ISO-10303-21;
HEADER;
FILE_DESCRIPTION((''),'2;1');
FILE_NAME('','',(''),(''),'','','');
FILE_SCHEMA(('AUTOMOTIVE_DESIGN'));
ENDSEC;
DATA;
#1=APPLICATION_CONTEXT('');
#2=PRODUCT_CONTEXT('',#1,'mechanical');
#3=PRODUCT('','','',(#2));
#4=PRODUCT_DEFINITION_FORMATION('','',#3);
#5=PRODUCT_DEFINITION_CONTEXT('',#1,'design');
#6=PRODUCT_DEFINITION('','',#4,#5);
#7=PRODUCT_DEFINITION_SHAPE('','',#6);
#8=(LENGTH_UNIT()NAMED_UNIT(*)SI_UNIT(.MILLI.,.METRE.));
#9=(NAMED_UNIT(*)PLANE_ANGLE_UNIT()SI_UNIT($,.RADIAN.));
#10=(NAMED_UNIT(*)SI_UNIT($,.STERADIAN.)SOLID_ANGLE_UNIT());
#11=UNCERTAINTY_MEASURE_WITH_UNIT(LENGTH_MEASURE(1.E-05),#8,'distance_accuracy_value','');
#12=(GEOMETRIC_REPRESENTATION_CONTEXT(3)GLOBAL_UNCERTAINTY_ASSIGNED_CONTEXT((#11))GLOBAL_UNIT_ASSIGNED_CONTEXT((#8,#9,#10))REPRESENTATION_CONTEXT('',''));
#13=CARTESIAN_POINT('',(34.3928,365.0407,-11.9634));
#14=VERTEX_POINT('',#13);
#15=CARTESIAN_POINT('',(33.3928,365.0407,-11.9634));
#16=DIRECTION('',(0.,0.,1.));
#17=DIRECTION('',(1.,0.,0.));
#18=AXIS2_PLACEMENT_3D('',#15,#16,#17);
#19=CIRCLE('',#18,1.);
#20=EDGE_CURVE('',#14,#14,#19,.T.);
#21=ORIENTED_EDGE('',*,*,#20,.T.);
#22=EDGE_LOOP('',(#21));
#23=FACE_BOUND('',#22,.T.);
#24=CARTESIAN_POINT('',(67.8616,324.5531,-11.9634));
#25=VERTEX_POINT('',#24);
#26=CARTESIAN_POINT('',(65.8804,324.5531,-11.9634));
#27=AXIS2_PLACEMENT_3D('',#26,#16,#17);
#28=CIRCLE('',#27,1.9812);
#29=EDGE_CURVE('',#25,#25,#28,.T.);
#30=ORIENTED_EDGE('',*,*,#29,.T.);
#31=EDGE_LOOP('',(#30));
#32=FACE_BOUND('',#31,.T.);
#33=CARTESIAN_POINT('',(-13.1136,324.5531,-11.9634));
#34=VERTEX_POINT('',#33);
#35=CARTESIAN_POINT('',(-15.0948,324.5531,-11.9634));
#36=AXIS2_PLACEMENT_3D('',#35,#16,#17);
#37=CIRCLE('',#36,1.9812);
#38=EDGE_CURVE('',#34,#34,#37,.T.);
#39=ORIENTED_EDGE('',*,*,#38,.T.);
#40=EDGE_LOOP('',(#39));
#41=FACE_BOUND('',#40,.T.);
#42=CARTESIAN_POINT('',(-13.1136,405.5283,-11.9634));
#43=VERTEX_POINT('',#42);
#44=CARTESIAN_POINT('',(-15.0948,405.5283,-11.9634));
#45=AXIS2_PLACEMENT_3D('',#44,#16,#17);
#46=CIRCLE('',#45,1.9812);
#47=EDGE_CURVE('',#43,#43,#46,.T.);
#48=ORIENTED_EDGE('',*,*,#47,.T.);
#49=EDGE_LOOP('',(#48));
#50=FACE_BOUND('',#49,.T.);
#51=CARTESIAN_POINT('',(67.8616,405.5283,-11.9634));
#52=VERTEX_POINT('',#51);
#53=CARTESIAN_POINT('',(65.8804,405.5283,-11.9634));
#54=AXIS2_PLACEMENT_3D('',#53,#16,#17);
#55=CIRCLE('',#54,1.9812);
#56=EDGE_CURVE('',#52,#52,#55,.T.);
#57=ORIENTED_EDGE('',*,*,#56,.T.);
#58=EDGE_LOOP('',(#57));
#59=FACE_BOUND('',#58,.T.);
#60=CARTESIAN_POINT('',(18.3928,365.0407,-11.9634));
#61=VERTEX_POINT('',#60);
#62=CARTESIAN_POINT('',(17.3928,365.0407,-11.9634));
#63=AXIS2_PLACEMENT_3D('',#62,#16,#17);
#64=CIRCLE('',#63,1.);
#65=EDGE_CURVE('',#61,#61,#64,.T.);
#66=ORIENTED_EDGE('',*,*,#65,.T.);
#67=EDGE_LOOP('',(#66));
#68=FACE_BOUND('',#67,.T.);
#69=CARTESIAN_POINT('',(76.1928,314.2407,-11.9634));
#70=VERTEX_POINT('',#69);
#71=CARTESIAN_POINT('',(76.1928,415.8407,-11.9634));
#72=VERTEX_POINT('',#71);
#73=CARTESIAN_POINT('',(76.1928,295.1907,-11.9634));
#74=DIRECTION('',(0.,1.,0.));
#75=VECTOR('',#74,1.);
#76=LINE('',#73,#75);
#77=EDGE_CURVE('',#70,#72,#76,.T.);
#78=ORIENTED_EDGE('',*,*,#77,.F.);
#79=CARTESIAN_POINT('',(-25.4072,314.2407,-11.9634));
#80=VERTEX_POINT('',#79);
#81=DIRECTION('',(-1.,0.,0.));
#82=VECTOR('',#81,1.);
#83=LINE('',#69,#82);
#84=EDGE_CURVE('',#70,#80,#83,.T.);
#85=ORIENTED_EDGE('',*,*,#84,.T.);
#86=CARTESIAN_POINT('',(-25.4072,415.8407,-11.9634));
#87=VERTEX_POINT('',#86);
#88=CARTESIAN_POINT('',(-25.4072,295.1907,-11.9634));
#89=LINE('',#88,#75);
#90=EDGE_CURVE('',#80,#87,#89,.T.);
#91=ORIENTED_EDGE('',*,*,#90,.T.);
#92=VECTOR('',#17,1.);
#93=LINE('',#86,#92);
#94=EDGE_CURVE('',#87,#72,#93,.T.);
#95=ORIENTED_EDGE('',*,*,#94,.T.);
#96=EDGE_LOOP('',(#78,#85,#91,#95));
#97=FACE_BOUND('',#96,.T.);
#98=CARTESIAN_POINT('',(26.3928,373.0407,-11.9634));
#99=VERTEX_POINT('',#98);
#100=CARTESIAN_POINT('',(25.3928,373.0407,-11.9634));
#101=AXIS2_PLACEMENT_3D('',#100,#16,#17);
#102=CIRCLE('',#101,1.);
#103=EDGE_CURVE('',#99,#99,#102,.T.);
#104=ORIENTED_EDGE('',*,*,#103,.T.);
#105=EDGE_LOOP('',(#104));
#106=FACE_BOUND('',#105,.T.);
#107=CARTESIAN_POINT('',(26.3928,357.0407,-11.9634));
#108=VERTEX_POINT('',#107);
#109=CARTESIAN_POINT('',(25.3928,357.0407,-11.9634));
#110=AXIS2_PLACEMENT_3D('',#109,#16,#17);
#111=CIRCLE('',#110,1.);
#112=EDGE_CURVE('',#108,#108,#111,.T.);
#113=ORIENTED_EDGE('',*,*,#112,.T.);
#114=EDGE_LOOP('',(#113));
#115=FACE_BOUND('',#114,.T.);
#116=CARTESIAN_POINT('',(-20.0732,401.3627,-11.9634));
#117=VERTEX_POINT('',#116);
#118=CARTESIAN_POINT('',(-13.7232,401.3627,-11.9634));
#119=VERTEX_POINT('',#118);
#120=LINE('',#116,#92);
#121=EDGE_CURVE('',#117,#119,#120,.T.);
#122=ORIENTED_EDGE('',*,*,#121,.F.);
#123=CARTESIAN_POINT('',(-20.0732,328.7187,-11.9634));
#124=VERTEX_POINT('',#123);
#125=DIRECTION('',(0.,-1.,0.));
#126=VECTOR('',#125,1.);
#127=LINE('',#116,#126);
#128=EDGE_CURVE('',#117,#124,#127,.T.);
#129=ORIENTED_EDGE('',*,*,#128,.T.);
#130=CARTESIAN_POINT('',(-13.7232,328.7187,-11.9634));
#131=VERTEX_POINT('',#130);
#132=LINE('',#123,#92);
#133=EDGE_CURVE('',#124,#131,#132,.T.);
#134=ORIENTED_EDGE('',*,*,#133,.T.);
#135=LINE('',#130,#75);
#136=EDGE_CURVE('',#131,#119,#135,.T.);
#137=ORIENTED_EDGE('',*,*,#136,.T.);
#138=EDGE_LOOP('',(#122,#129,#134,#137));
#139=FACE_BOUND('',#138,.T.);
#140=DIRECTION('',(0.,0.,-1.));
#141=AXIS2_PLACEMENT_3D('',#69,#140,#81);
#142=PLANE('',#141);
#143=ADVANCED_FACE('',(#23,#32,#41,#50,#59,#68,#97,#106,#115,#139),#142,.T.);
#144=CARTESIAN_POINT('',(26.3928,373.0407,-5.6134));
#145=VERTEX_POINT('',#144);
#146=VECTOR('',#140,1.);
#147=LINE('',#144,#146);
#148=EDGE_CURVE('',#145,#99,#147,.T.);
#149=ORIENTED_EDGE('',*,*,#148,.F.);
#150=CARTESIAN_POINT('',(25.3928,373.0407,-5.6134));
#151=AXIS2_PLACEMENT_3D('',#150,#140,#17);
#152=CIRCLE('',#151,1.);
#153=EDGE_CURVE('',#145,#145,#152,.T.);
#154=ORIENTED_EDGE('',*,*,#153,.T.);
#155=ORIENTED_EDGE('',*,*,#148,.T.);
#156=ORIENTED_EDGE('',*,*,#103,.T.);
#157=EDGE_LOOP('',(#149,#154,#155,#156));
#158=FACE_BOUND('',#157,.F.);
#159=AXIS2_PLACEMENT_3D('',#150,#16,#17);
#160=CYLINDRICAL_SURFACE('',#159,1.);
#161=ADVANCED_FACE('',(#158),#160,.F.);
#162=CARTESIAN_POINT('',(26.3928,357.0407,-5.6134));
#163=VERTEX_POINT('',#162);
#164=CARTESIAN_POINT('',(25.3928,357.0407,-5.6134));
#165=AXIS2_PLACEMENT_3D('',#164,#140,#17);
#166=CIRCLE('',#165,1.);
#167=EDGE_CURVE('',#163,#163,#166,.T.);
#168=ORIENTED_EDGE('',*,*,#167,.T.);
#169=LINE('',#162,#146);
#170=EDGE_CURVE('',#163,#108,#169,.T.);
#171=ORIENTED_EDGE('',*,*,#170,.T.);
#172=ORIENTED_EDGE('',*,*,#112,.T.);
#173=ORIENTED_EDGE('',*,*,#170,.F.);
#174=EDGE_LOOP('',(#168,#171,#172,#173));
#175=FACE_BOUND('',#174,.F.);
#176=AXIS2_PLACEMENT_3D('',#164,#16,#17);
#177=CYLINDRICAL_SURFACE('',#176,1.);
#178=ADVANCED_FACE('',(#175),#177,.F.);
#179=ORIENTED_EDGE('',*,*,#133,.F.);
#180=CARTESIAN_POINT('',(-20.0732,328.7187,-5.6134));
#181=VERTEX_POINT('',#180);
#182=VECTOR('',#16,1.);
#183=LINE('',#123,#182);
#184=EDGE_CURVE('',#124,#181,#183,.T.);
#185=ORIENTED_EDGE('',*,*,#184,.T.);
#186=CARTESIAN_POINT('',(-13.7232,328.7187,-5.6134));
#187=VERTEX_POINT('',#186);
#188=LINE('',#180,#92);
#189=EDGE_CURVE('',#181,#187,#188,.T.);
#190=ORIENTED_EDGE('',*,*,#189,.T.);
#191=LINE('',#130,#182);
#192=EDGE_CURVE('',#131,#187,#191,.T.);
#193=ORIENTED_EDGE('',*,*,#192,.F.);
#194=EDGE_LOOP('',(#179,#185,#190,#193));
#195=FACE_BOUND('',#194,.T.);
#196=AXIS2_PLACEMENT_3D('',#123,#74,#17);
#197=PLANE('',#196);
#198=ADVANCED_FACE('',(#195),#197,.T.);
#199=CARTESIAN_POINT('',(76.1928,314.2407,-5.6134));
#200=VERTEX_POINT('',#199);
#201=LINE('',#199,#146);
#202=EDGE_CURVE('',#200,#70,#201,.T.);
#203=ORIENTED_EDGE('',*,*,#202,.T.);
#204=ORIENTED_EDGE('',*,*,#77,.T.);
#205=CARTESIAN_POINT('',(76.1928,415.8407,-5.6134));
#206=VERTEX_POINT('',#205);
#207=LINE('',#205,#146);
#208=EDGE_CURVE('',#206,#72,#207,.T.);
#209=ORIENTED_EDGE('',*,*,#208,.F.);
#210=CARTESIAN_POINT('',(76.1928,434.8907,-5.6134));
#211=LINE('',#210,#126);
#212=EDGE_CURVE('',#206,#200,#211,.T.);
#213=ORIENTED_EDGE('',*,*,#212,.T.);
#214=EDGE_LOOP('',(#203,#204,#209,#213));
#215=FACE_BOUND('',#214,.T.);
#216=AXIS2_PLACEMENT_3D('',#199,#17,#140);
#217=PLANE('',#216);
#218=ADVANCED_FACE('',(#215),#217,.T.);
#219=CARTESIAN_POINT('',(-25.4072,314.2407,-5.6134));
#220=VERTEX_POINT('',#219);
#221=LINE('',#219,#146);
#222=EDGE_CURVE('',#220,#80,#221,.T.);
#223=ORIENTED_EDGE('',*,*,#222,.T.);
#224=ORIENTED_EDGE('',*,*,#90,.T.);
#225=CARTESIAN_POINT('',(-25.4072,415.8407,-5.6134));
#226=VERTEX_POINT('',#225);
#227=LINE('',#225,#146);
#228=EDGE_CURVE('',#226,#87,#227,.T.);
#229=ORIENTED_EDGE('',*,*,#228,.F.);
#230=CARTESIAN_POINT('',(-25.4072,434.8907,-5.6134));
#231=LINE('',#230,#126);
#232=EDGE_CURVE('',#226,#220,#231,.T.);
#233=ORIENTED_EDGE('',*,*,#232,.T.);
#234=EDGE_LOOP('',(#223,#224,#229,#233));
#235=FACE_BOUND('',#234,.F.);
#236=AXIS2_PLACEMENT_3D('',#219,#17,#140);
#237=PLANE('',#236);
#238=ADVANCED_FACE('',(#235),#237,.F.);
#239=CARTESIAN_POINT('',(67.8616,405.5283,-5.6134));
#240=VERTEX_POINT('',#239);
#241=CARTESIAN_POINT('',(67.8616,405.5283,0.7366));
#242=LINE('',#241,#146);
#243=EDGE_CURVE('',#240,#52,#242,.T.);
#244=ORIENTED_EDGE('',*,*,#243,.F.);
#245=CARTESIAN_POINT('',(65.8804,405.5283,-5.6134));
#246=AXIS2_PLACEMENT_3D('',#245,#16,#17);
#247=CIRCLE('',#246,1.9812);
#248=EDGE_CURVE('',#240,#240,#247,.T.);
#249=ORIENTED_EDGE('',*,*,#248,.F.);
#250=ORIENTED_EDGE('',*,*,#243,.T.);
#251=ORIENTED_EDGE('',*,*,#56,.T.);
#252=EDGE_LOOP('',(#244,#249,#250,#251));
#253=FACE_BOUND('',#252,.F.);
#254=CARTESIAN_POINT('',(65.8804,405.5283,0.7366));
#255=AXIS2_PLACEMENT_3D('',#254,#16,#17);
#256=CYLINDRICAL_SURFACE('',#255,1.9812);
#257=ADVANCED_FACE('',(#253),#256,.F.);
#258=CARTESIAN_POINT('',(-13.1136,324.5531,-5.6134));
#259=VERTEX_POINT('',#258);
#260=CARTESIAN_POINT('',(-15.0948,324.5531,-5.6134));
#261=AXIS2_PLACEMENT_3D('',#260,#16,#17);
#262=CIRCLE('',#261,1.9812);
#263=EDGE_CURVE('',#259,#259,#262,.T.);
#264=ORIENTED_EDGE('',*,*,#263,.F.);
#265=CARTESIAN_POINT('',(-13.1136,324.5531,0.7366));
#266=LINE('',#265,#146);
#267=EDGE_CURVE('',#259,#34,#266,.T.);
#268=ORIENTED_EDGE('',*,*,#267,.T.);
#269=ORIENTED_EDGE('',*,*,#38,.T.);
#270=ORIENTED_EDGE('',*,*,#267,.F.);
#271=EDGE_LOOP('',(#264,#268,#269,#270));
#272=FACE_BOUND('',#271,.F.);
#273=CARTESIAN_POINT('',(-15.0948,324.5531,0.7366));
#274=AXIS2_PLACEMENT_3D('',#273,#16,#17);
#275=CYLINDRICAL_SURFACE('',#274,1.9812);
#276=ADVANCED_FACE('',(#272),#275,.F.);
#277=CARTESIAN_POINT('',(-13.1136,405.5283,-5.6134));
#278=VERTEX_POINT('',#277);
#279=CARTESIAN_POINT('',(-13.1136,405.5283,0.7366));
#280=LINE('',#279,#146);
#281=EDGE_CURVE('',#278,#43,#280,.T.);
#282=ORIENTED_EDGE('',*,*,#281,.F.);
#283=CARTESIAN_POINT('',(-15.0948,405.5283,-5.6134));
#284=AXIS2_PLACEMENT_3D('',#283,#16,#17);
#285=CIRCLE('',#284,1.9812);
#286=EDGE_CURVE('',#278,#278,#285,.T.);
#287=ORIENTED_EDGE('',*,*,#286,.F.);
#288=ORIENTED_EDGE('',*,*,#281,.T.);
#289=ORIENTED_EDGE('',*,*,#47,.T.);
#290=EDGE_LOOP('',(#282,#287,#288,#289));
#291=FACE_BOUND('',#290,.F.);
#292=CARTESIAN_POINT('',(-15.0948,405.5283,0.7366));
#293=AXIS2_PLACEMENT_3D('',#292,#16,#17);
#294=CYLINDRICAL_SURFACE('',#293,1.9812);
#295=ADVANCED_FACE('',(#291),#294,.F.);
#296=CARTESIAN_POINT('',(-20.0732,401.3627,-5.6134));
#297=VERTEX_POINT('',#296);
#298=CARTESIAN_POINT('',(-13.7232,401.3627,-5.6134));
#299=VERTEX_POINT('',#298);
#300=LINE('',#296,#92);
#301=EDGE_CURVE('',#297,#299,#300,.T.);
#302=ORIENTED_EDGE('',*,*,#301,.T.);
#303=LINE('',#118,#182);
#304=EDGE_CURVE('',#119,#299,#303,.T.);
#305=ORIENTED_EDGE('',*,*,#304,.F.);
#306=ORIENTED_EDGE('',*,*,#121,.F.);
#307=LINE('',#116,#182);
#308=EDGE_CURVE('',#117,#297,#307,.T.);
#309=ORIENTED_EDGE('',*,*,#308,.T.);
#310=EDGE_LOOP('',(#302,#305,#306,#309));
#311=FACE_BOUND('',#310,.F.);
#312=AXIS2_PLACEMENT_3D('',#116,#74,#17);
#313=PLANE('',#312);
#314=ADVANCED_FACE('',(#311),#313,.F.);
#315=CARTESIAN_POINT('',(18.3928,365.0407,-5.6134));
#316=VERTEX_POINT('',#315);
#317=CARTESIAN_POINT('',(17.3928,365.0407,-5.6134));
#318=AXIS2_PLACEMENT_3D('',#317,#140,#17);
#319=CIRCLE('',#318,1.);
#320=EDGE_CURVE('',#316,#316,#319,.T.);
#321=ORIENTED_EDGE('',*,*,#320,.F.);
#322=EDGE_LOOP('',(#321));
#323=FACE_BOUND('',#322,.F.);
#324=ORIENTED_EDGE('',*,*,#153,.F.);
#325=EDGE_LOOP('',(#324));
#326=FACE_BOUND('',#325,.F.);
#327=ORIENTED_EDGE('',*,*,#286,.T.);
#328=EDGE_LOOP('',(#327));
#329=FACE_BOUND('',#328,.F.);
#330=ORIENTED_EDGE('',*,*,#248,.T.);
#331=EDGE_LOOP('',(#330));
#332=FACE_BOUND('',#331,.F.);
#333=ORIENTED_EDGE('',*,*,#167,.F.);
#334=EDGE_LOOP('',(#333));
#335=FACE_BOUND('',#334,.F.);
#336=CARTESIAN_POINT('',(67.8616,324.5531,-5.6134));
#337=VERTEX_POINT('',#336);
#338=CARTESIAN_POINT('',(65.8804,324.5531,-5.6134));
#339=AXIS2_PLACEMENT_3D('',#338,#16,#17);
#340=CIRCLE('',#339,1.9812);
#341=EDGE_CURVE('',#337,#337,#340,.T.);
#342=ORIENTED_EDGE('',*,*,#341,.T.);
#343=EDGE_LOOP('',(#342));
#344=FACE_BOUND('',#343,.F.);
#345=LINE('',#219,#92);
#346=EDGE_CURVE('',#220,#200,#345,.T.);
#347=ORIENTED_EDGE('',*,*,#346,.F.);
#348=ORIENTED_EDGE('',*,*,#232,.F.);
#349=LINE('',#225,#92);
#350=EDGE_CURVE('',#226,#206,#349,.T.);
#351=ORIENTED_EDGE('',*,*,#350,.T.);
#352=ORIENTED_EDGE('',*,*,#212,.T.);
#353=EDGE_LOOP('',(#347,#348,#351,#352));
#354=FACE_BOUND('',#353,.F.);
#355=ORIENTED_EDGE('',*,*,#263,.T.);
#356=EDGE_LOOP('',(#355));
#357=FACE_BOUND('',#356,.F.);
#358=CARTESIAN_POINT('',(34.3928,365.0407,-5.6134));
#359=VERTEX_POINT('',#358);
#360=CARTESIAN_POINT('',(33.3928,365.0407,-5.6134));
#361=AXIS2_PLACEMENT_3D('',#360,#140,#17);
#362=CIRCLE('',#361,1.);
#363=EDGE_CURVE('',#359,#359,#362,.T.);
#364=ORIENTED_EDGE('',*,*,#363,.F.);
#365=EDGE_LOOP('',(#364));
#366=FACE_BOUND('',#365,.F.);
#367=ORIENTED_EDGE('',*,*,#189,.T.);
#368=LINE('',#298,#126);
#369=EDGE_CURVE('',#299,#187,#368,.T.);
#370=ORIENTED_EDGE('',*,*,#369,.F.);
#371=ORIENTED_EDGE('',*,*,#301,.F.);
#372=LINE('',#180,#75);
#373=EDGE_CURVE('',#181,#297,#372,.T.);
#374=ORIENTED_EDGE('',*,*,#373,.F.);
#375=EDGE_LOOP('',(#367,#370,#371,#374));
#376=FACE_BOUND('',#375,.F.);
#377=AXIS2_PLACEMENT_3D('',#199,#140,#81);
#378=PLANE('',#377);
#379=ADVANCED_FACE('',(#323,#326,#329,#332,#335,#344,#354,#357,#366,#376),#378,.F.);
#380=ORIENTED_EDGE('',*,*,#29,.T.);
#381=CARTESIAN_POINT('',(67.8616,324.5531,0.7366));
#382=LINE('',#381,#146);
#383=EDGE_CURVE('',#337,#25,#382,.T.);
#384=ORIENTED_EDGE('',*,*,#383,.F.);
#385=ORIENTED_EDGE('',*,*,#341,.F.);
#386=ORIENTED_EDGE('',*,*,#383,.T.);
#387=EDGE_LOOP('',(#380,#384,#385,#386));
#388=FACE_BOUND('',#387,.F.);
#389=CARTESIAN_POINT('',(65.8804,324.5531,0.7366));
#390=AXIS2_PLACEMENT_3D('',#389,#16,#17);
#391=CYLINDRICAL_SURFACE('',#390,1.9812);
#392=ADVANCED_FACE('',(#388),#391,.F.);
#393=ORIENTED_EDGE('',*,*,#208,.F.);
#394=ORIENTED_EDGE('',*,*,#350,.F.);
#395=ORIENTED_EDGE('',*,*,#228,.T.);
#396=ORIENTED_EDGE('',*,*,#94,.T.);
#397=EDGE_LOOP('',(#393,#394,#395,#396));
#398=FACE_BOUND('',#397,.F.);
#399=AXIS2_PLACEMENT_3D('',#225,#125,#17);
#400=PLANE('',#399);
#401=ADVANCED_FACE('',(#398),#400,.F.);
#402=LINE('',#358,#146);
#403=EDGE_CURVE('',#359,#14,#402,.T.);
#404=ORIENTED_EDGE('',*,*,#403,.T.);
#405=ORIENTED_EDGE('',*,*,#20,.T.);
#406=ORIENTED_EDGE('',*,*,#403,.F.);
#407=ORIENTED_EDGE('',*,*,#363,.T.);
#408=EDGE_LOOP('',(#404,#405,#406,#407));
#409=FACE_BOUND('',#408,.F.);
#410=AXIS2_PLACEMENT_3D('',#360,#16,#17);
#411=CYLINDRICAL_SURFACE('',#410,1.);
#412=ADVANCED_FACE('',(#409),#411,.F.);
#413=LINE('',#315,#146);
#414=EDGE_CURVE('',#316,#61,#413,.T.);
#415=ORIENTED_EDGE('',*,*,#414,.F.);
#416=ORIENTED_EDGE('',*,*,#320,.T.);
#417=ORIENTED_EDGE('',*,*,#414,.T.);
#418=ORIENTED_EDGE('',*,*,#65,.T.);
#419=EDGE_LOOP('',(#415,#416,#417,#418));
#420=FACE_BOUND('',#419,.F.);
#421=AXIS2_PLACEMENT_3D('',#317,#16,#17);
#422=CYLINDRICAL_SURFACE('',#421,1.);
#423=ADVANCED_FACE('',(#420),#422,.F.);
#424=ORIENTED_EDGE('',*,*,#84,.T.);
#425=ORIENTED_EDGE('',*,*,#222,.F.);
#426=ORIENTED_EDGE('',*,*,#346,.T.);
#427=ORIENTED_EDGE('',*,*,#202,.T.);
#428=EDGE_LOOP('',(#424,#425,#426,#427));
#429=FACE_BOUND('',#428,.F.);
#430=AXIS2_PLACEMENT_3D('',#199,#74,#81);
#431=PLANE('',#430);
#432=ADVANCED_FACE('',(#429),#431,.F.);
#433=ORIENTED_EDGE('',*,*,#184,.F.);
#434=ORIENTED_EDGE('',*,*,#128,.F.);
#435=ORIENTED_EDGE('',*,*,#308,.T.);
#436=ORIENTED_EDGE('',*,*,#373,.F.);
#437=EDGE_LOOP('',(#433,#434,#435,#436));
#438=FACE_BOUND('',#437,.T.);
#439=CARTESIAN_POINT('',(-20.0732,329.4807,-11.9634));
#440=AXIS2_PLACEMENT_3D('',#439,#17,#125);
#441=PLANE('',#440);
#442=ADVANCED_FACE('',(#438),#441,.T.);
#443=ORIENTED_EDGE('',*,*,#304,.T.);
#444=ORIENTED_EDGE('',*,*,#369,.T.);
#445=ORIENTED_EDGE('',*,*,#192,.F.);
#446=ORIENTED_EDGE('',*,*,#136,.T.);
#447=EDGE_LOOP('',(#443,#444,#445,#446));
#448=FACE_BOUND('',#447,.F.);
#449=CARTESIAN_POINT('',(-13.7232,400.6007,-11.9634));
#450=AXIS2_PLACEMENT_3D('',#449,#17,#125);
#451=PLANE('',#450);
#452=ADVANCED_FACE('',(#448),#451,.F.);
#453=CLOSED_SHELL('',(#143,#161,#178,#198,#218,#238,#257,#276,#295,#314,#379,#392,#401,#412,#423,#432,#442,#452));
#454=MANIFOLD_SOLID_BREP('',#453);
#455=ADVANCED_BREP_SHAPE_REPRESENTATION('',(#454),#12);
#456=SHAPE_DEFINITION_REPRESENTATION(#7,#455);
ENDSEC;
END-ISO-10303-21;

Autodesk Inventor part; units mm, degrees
ref_plane "YZ Plane" through (0, 0, 0) normal (1, 0, 0) x (0, 1, 0)
ref_plane "XZ Plane" through (0, 0, 0) normal (0, 1, 0) x (-1, 0, 0)
ref_plane "XY Plane" through (0, 0, 0) normal (0, 0, 1) x (1, 0, 0)
sketch "Sketch1" plane through (0, 0, 0) normal (0, 0, 1) x (1, 0, 0)
  line L0 (-25.4072, 25.3665) -> (76.1928, 25.3665)
  line L1 (76.1928, 25.3665) -> (76.1928, -76.2335)
  line L2 (76.1928, -76.2335) -> (-25.4072, -76.2335)
  line L3 (-25.4072, -76.2335) -> (-25.4072, 25.3665)
  point P0 (0, 0)
  dimension "d0" = 101.6
  dimension "d1" = 101.6
extrude "Extrusion1" add sketch "Sketch1" along normal blind 0.7366
sketch "Sketch2" plane through (0, 0, 0.7366) normal (0, 0, 1) x (1, 0, 0)
  line L0 (-25.4072, 25.3665) -> (76.1928, -76.2335)
  line L1 (76.1928, 25.3665) -> (-25.4072, -76.2335)
  circle A0 centre (25.3928, -25.4335) radius 27.432
  point P0 (0, 0)
  dimension "d4" = 54.864
extrude "Extrusion2" cut sketch "Sketch2" against normal blind 0.7366
sketch "Sketch3" plane through (0, 0, 0.7366) normal (0, 0, 1) x (1, 0, 0)
  line L0 (-25.4072, -76.2335) -> (-25.4072, 25.3665) projected
  line L1 (-25.4072, 25.3665) -> (-25.4072, -25.4335)
  line L2 (-25.4072, -25.4335) -> (-25.4072, 19.4102)
  line L3 (-25.4072, 25.3665) -> (76.1928, -76.2335)
  line L4 (76.1928, 25.3665) -> (-25.4072, -76.2335)
  circle A0 centre (-19.4509, 19.4102) radius 1.9812
  point P0 (0, 0)
  dimension "d7" = 44.8437
  dimension "d8" = 3.9624
extrude "Extrusion3" cut sketch "Sketch3" against normal blind 0.7366 contours A0 L3 | L3 A0
sketch "Sketch4" plane through (0, 0, 0.7366) normal (0, 0, 1) x (1, 0, 0)
  line L0 (-25.4072, -76.2335) -> (76.1928, 25.3665)
  line L1 (-25.4072, 25.3665) -> (76.1928, -76.2335)
  circle A0 centre (70.2365, 19.4102) radius 1.9819
  circle A1 centre (70.2365, -70.2772) radius 1.983
  circle A2 centre (-19.4509, -70.2772) radius 1.9812
  point P0 (0, 0)
extrude "Extrusion4" cut sketch "Sketch4" against normal blind 0.7366
sketch "Sketch5" plane through (0, 0, 0.7366) normal (0, 0, 1) x (1, 0, 0)
  circle A0 centre (25.3928, -25.4335) radius 27.432 projected
  circle A1 centre (25.3928, -25.4335) radius 29.972
  circle A2 centre (25.3928, -25.4335) radius 32.512
  point P0 (0, 0)
  dimension "d13" = 59.944
  dimension "d14" = 65.024
extrude "Extrusion5" add sketch "Sketch5" along normal blind 6.6548 contours A2
fillet "Fillet1" radius 3.175 4 edges at (-25.4072, 25.3665, 0.3683) (76.1928, 25.3665, 0.3683) (76.1928, -76.2335, 0.3683) (-25.4072, -76.2335, 0.3683)
sketch "Sketch6" plane through (25.3928, -25.4335, 0.7366) normal (0, 0, 1) x (1, 0, 0)
  circle A0 centre (0, 0) radius 29.972 projected
  circle A1 centre (0, 0) radius 27.432 projected
  point P0 (-25.3928, 25.4335)
extrude "Extrusion6" add sketch "Sketch6" along normal blind 9.1948
sketch "Sketch7" plane through (25.3928, -25.4335, 7.3914) normal (0, 0, 1) x (1, 0, 0)
  circle A0 centre (0, 0) radius 29.972 projected
  circle A1 centre (0, 0) radius 32.512 projected
  point P0 (-25.3928, 25.4335)
extrude "Extrusion7" cut sketch "Sketch7" against normal blind 6.6548
sketch "Sketch8" plane through (25.3928, -25.4335, 9.9314) normal (0, 0, 1) x (1, 0, 0)
  circle A0 centre (0, 0) radius 27.432 projected
  circle A1 centre (0, 0) radius 29.972 projected
  point P0 (-25.3928, 25.4335)
extrude "Extrusion8" cut sketch "Sketch8" against normal blind 2.54
sketch "Sketch9" plane through (0, 0, 0.7366) normal (0, 0, 1) x (1, 0, 0)
  circle A0 centre (-19.4509, 19.4102) radius 1.9812 projected
  circle A1 centre (70.2365, -70.2772) radius 1.983 projected
  circle A2 centre (-19.4509, -70.2772) radius 1.9812 projected
  circle A3 centre (70.2365, 19.4102) radius 1.9819 projected
  point P0 (0, 0)
extrude "Extrusion9" add sketch "Sketch9" against normal blind 0.7366
sketch "Sketch10" plane through (0, 0, 0.7366) normal (0, 0, 1) x (1, 0, 0)
  line L0 (-25.4072, 25.3665) -> (76.1928, 25.3665)
  line L1 (76.1928, 25.3665) -> (76.1928, -76.2335)
  line L2 (76.1928, -76.2335) -> (-25.4072, -76.2335)
  line L3 (-25.4072, -76.2335) -> (-25.4072, 25.3665)
  line L4 (-25.4072, 25.3665) -> (76.1928, -76.2335)
  line L5 (-25.4072, -76.2335) -> (76.1928, 25.3665)
  line L6 (-25.4072, 25.3665) -> (-25.4072, -25.4335)
  line L7 (-25.4072, -25.4335) -> (-25.4072, 15.0541)
  circle A0 centre (-15.0948, 15.0541) radius 1.9812
  circle A1 centre (65.8804, 15.0541) radius 1.9818
  circle A2 centre (65.8804, -65.9211) radius 1.9832
  circle A3 centre (-15.0948, -65.9211) radius 1.9812
  point P0 (0, 0)
  dimension "d26" = 40.4876
  dimension "d27" = 3.9624
extrude "Extrusion10" cut sketch "Sketch10" against normal blind 0.7366 contours A0 L4 | L4 A0 | A1 L5 | L5 A1 | A2 L4 | L4 A2 | A3 L5 | L5 A3
sketch "Sketch11" plane through (0, 0, 0.7366) normal (0, 0, 1) x (1, 0, 0)
  circle A0 centre (-15.0948, 15.0541) radius 1.9812 projected
  circle A1 centre (-15.0948, -65.9211) radius 1.9812 projected
  circle A2 centre (65.8804, 15.0541) radius 1.9818 projected
  circle A3 centre (65.8804, -65.9211) radius 1.9832 projected
  line L0 (-25.4072, 25.3665) -> (76.1928, 25.3665)
  line L1 (76.1928, 25.3665) -> (76.1928, -76.2335)
  line L2 (76.1928, -76.2335) -> (-25.4072, -76.2335)
  line L3 (-25.4072, -76.2335) -> (-25.4072, 25.3665)
  point P0 (0, 0)
extrude "Extrusion11" add sketch "Sketch11" along normal blind 12.7
sketch "Sketch12" plane through (0, 0, 13.4366) normal (0, 0, 1) x (1, 0, 0)
  circle A0 centre (65.8804, -65.9211) radius 1.9832 projected
  circle A1 centre (65.8804, 15.0541) radius 1.9818 projected
  circle A2 centre (-15.0948, 15.0541) radius 1.9812 projected
  circle A3 centre (-15.0948, -65.9211) radius 1.9812 projected
  line L0 (76.1928, 25.3665) -> (76.1928, -76.2335) projected
  line L1 (-25.4072, 25.3665) -> (76.1928, 25.3665) projected
  line L2 (-25.4072, -76.2335) -> (-25.4072, 25.3665) projected
  line L3 (76.1928, -76.2335) -> (-25.4072, -76.2335) projected
  point P0 (0, 0)
extrude "Extrusion12" add sketch "Sketch12" against normal blind 19.05
sketch "Sketch13" plane through (0, 0, 13.4366) normal (0, 0, 1) x (1, 0, 0)
  circle A0 centre (65.8804, -65.9211) radius 1.9832 projected
  circle A1 centre (65.8804, 15.0541) radius 1.9818 projected
  circle A2 centre (-15.0948, 15.0541) radius 1.9812 projected
  circle A3 centre (-15.0948, -65.9211) radius 1.9812 projected
  line L0 (76.1928, 25.3665) -> (76.1928, -76.2335) projected
  line L1 (-25.4072, 25.3665) -> (76.1928, 25.3665) projected
  line L2 (-25.4072, -76.2335) -> (-25.4072, 25.3665) projected
  line L3 (76.1928, -76.2335) -> (-25.4072, -76.2335) projected
  point P0 (0, 0)
extrude "Extrusion13" cut sketch "Sketch13" against normal blind 12.7
sketch "Sketch14" plane through (-25.4072, 25.3665, -5.6134) normal (0, 1, 0) x (1, 0, 0)
  line L0 (0, -6.35) -> (101.6, -6.35) projected
  line L1 (101.6, -6.35) -> (101.6, 0) projected
  line L2 (101.6, 0) -> (0, 0) projected
  line L3 (0, 0) -> (0, -6.35) projected
  point P0 (25.4072, -5.6134)
sketch "Sketch15" plane through (-25.4072, -76.2335, -5.6134) normal (-1, 0, 0) x (0, 0, 1)
  line L0 (6.35, 0) -> (6.35, 101.6) projected
  line L1 (0, 101.6) -> (6.35, 101.6) projected
  line L2 (0, 101.6) -> (0, 0) projected
  line L3 (6.35, 0) -> (0, 0) projected
  point P0 (5.6134, 76.2335)
sketch "Sketch16" plane through (-25.4072, -76.2335, -5.6134) normal (0, -1, 0) x (1, 0, 0)
  line L0 (101.6, 6.35) -> (0, 6.35) projected
  line L1 (0, 6.35) -> (0, 0) projected
  line L2 (0, 0) -> (101.6, 0) projected
  line L3 (101.6, 6.35) -> (101.6, 0) projected
  point P0 (25.4072, 5.6134)
sketch "Sketch17" plane through (76.1928, -76.2335, -5.6134) normal (1, 0, 0) x (0, 0, -1)
  line L0 (-6.35, 101.6) -> (-6.35, 0) projected
  line L1 (-6.35, 0) -> (0, 0) projected
  line L2 (0, 0) -> (0, 101.6) projected
  line L3 (-6.35, 101.6) -> (0, 101.6) projected
  point P0 (-5.6134, 76.2335)
extrude "Extrusion14" add sketch "Sketch14" along normal blind 53.975
extrude "Extrusion15" add sketch "Sketch17" along normal blind 47.625
extrude "Extrusion16" add sketch "Sketch16" along normal blind 47.625
extrude "Extrusion17" add sketch "Sketch15" along normal blind 53.975
sketch "Sketch18" plane through (-25.4072, 25.3665, 0.7366) normal (0, 1, 0) x (1, 0, 0)
  line L0 (-53.975, 6.35) -> (-53.975, 0) projected
  line L1 (0, 0) -> (-53.975, 0) projected
  line L2 (0, 6.35) -> (0, 0) projected
  line L3 (0, 6.35) -> (-53.975, 6.35) projected
  point P0 (25.4072, 0.7366)
extrude "Extrusion18" add sketch "Sketch18" along normal blind 53.975
sketch "Sketch19" plane through (76.1928, 25.3665, 0.7366) normal (0, 1, 0) x (1, 0, 0)
  line L0 (47.625, 0) -> (47.625, 6.35) projected
  line L1 (0, 6.35) -> (47.625, 6.35) projected
  line L2 (0, 0) -> (0, 6.35) projected
  line L3 (0, 0) -> (47.625, 0) projected
  point P0 (-76.1928, 0.7366)
extrude "Extrusion19" add sketch "Sketch19" along normal blind 53.975
sketch "Sketch20" plane through (-25.4072, -123.8585, -5.6134) normal (-1, 0, 0) x (0, 0, 1)
  line L0 (6.35, 47.625) -> (0, 47.625) projected
  line L1 (0, 47.625) -> (0, 0) projected
  line L2 (0, 0) -> (6.35, 0) projected
  line L3 (6.35, 0) -> (6.35, 47.625) projected
  point P0 (5.6134, 123.8585)
extrude "Extrusion20" add sketch "Sketch20" along normal blind 53.975
sketch "Sketch21" plane through (123.8178, -76.2335, -5.6134) normal (0, -1, 0) x (1, 0, 0)
  line L0 (-47.625, 6.35) -> (-47.625, 0) projected
  line L1 (-47.625, 0) -> (0, 0) projected
  line L2 (0, 0) -> (0, 6.35) projected
  line L3 (0, 6.35) -> (-47.625, 6.35) projected
  point P0 (-123.8178, 5.6134)
extrude "Extrusion21" add sketch "Sketch21" along normal blind 47.625
sketch "Sketch22" plane through (-25.4072, 79.3415, -5.6134) normal (0, 1, 0) x (1, 0, 0)
  line L0 (149.225, -6.35) -> (-53.975, -6.35) projected
  line L1 (149.225, 0) -> (149.225, -6.35) projected
  line L2 (-53.975, 0) -> (149.225, 0) projected
  line L3 (-53.975, -6.35) -> (-53.975, 0) projected
  point P0 (25.4072, -5.6134)
extrude "Extrusion22" cut sketch "Sketch22" against normal blind 53.975
sketch "Sketch23" plane through (-79.3822, -76.2335, -5.6134) normal (-1, 0, 0) x (0, 0, 1)
  line L0 (6.35, 101.6) -> (0, 101.6) projected
  line L1 (0, -47.625) -> (0, 101.6) projected
  line L2 (6.35, -47.625) -> (0, -47.625) projected
  line L3 (6.35, 101.6) -> (6.35, -47.625) projected
  point P0 (5.6134, 76.2335)
extrude "Extrusion23" cut sketch "Sketch23" against normal blind 53.975
sketch "Sketch24" plane through (-25.4072, -123.8585, -5.6134) normal (0, -1, 0) x (1, 0, 0)
  line L0 (0, 6.35) -> (0, 0) projected
  line L1 (149.225, 0) -> (0, 0) projected
  line L2 (149.225, 6.35) -> (149.225, 0) projected
  line L3 (0, 6.35) -> (149.225, 6.35) projected
  point P0 (25.4072, 5.6134)
extrude "Extrusion24" cut sketch "Sketch24" against normal blind 47.625
sketch "Sketch25" plane through (123.8178, -76.2335, -5.6134) normal (1, 0, 0) x (0, 0, -1)
  line L0 (-6.35, 0) -> (0, 0) projected
  line L1 (0, 101.6) -> (0, 0) projected
  line L2 (0, 101.6) -> (-6.35, 101.6) projected
  line L3 (-6.35, 0) -> (-6.35, 101.6) projected
  point P0 (-5.6134, 76.2335)
extrude "Extrusion25" cut sketch "Sketch25" against normal blind 47.625
sketch "Sketch26" plane through (-25.4072, 25.3665, -5.6134) normal (0, 1, 0) x (1, 0, 0)
  line L0 (101.6, -6.35) -> (101.6, 0) projected
  line L1 (0, 0) -> (101.6, 0) projected
  line L2 (0, 0) -> (0, -6.35) projected
  line L3 (101.6, -6.35) -> (0, -6.35) projected
  point P0 (25.4072, -5.6134)
extrude "Extrusion26" add sketch "Sketch26" along normal blind 53.975
sketch "Sketch27" plane through (-25.4072, -76.2335, -5.6134) normal (-1, 0, 0) x (0, 0, 1)
  line L0 (0, 0) -> (6.35, 0) projected
  line L1 (6.35, 0) -> (6.35, 155.575) projected
  line L2 (6.35, 155.575) -> (0, 155.575) projected
  line L3 (0, 0) -> (0, 155.575) projected
  point P0 (5.6134, 76.2335)
extrude "Extrusion27" add sketch "Sketch27" along normal blind 53.975
sketch "Sketch28" plane through (-25.4072, -76.2335, -5.6134) normal (0, -1, 0) x (1, 0, 0)
  line L0 (101.6, 0) -> (101.6, 6.35) projected
  line L1 (101.6, 6.35) -> (-53.975, 6.35) projected
  line L2 (-53.975, 6.35) -> (-53.975, 0) projected
  line L3 (101.6, 0) -> (-53.975, 0) projected
  point P0 (25.4072, 5.6134)
extrude "Extrusion28" add sketch "Sketch28" along normal blind 22.225
sketch "Sketch29" plane through (-25.4072, 79.3415, -5.6134) normal (0, 1, 0) x (1, 0, 0)
  line L0 (101.6, -6.35) -> (-53.975, -6.35) projected
  line L1 (101.6, 0) -> (101.6, -6.35) projected
  line L2 (-53.975, 0) -> (101.6, 0) projected
  line L3 (-53.975, 0) -> (-53.975, -6.35) projected
  point P0 (25.4072, -5.6134)
extrude "Extrusion29" add sketch "Sketch29" along normal blind 158.6992
sketch "Sketch30" plane through (-25.4072, 238.0407, -5.6134) normal (0, 1, 0) x (1, 0, 0)
  line L0 (-53.975, -6.35) -> (-53.975, 0) projected
  line L1 (101.6, -6.35) -> (-53.975, -6.35) projected
  line L2 (101.6, 0) -> (101.6, -6.35) projected
  line L3 (-53.975, 0) -> (101.6, 0) projected
  point P0 (25.4072, -5.6134)
extrude "Extrusion30" add sketch "Sketch30" along normal blind 177.8
sketch "Sketch31" plane through (0, 0, 0.7366) normal (0, 0, 1) x (1, 0, 0)
  line L0 (76.1928, 415.8407) -> (76.1928, -98.4585) projected
  line L1 (76.1928, 415.8407) -> (-79.3822, 415.8407) projected
  line L2 (65.8804, 415.8407) -> (65.8804, 383.3033)
  line L3 (65.8804, 383.3033) -> (-17.076, 383.3033)
  line L4 (-17.076, 383.3033) -> (-13.1136, 383.3033)
  line L5 (-13.1136, 383.3033) -> (-15.0948, 383.3033)
  circle A0 centre (-15.0948, 383.3033) radius 1.9812
  circle A1 centre (65.8804, 383.3033) radius 1.9812
  line L6 (65.8804, 383.3033) -> (65.8804, 302.3281)
  circle A2 centre (65.8804, 302.3281) radius 1.9812
  line L7 (-15.0948, 383.3033) -> (-15.0948, 302.3281)
  circle A3 centre (-15.0948, 302.3281) radius 1.9812
  point P0 (0, 0)
  dimension "d70" = 32.5374
  dimension "d71" = 80.9752
extrude "Extrusion31" cut sketch "Sketch31" against normal blind 177.8
sketch "Sketch32" plane through (0, 0, -5.6134) normal (0, 0, -1) x (-1, 0, 0)
  circle A0 centre (15.0948, 383.3033) radius 1.9812 projected
  circle A1 centre (15.0948, 302.3281) radius 1.9812 projected
  circle A2 centre (-65.8804, 302.3281) radius 1.9812 projected
  circle A3 centre (-65.8804, 383.3033) radius 1.9812 projected
  circle A4 centre (15.0948, -65.9211) radius 1.9812 projected
  circle A5 centre (15.0948, 15.0541) radius 1.9812 projected
  circle A6 centre (-65.8804, 15.0541) radius 1.9818 projected
  circle A7 centre (-65.8804, -65.9211) radius 1.9832 projected
  line L0 (-76.1928, 415.8407) -> (-76.1928, -98.4585) projected
  line L1 (-76.1928, -98.4585) -> (79.3822, -98.4585) projected
  line L2 (79.3822, -98.4585) -> (79.3822, 415.8407) projected
  line L3 (79.3822, 415.8407) -> (-76.1928, 415.8407) projected
  point P0 (0, 0)
extrude "Extrusion32" add sketch "Sketch32" along normal blind 6.35
sketch "Sketch33" plane through (0, 0, 0.7366) normal (0, 0, 1) x (1, 0, 0)
  line L0 (76.1928, 415.8407) -> (76.1928, -98.4585) projected
  line L1 (76.1928, 158.6911) -> (76.1928, 107.8911)
  line L2 (76.1928, 107.8911) -> (25.3928, 107.8911)
  line L3 (25.3928, 107.8911) -> (25.3928, 209.4911)
  line L4 (25.3928, 209.4911) -> (76.1928, 209.4911)
  line L5 (76.1928, 209.4911) -> (76.1928, 107.8911)
  point P0 (0, 0)
  dimension "d76" = 50.8
  dimension "d77" = 50.8
  dimension "d78" = 101.6
extrude "Extrusion33" cut sketch "Sketch33" against normal blind 25.4
sketch "Sketch34" plane through (0, 0, 0.7366) normal (0, 0, 1) x (1, 0, 0)
  line L0 (25.3928, 107.8911) -> (25.3928, 209.4911) projected
  line L1 (76.1928, 107.8911) -> (76.1928, -98.4585) projected
  line L2 (25.3928, 158.6911) -> (-25.4072, 158.6911)
  circle A0 centre (-25.4072, 158.6911) radius 12.7
  point P0 (0, 0)
  dimension "d81" = 50.8
  dimension "d82" = 25.4
extrude "Extrusion34" cut sketch "Sketch34" against normal blind 25.4
fillet "Fillet2" radius 12.7 2 edges at (25.3928, 209.4911, -5.6134) (25.3928, 107.8911, -5.6134)
sketch "Sketch35" plane through (0, 0, 0.7366) normal (0, 0, 1) x (1, 0, 0)
  line L0 (-79.3822, 415.8407) -> (76.1928, 415.8407)
  line L1 (76.1928, 415.8407) -> (76.1928, 422.1907)
  line L2 (76.1928, 422.1907) -> (-79.3822, 422.1907)
  line L3 (-79.3822, 422.1907) -> (-79.3822, 415.8407)
  line L4 (-79.3822, -98.4585) -> (76.1928, -98.4585)
  line L5 (76.1928, -98.4585) -> (76.1928, -104.8085)
  line L6 (76.1928, -104.8085) -> (-79.3822, -104.8085)
  line L7 (-79.3822, -104.8085) -> (-79.3822, -98.4585)
  point P0 (0, 0)
  dimension "d86" = 6.35
  dimension "d87" = 6.35
extrude "Extrusion35" add sketch "Sketch35" against normal blind 6.35
sketch "Sketch36" plane through (-25.4072, 415.8407, -5.6134) normal (0, 1, 0) x (1, 0, 0)
  line L0 (-53.975, 0) -> (101.6, 0) projected
  line L1 (101.6, 6.35) -> (101.6, 0) projected
  line L2 (101.6, 6.35) -> (-53.975, 6.35) projected
  line L3 (-53.975, 0) -> (-53.975, 6.35) projected
  point P0 (25.4072, -5.6134)
extrude "Extrusion36" add sketch "Sketch36" along normal blind 6.35
sketch "Sketch37" plane through (-25.4072, -98.4585, -5.6134) normal (0, -1, 0) x (1, 0, 0)
  line L0 (101.6, 0) -> (-53.975, 0) projected
  line L1 (-53.975, -6.35) -> (-53.975, 0) projected
  line L2 (-53.975, -6.35) -> (101.6, -6.35) projected
  line L3 (101.6, 0) -> (101.6, -6.35) projected
  point P0 (25.4072, 5.6134)
extrude "Extrusion37" add sketch "Sketch37" along normal blind 6.35
sketch "Sketch38" plane through (0, 0, 0.7366) normal (0, 0, 1) x (1, 0, 0)
  line L0 (76.1928, 422.1907) -> (-79.3822, 422.1907) projected
  line L1 (76.1928, 107.8911) -> (76.1928, -104.8085) projected
  circle A0 centre (65.8804, 302.3281) radius 1.9812 projected
  circle A1 centre (-15.0948, 302.3281) radius 1.9812 projected
  line L2 (-15.0948, 422.1907) -> (-15.0948, 405.5283)
  line L3 (-15.0948, 405.5283) -> (65.8804, 405.5283)
  line L4 (65.8804, 302.3281) -> (65.8804, 324.5531)
  line L5 (-15.0948, 302.3281) -> (-15.0948, 324.5531)
  circle A2 centre (-15.0948, 324.5531) radius 1.9812
  circle A3 centre (-15.0948, 405.5283) radius 1.9812
  circle A4 centre (65.8804, 405.5283) radius 1.9812
  circle A5 centre (65.8804, 324.5531) radius 1.9812
  point P0 (0, 0)
  dimension "d94" = 16.6624
  dimension "d95" = 22.225
extrude "Extrusion38" cut sketch "Sketch38" against normal blind 12.7 contours A3 L3 L2 | L2 L3 A3 | A2 | A4 | A5
sketch "Sketch39" plane through (0, 0, 0.7366) normal (0, 0, 1) x (1, 0, 0)
  circle A0 centre (65.8804, 383.3033) radius 1.9812 projected
  circle A1 centre (65.8804, 302.3281) radius 1.9812 projected
  circle A2 centre (-15.0948, 302.3281) radius 1.9812 projected
  circle A3 centre (-15.0948, 383.3033) radius 1.9812 projected
  point P0 (0, 0)
extrude "Extrusion39" add sketch "Sketch39" against normal blind 12.7
sketch "Sketch40" plane through (0, 0, 0.7366) normal (0, 0, 1) x (1, 0, 0)
  circle A0 centre (-15.0948, 15.0541) radius 1.9812 projected
  circle A1 centre (-15.0948, -65.9211) radius 1.9812 projected
  line L0 (76.1928, 107.8911) -> (76.1928, -104.8085) projected
  line L1 (-15.0948, -65.9211) -> (-15.0948, -88.1461)
  line L2 (-15.0948, -88.1461) -> (65.8804, -88.1461)
  line L3 (-15.0948, 15.0541) -> (-15.0948, -7.1709)
  line L4 (-15.0948, -7.1709) -> (65.8804, -7.1709)
  circle A2 centre (-15.0948, -88.1461) radius 1.9812
  circle A3 centre (65.8804, -88.1461) radius 1.9818
  circle A4 centre (65.8804, -7.1709) radius 1.9818
  circle A5 centre (-15.0948, -7.1709) radius 1.9812
  point P0 (0, 0)
  dimension "d100" = 22.225
  dimension "d101" = 22.225
extrude "Extrusion40" cut sketch "Sketch40" against normal blind 12.7 contours A2 L2 L1 | L1 L2 A2 | A5 L4 L3 | L3 L4 A5 | A3 | A4
sketch "Sketch41" plane through (0, 0, 0.7366) normal (0, 0, 1) x (1, 0, 0)
  circle A0 centre (65.8804, -65.9211) radius 1.9832 projected
  circle A1 centre (65.8804, 15.0541) radius 1.9818 projected
  circle A2 centre (-15.0948, 15.0541) radius 1.9812 projected
  circle A3 centre (-15.0948, -65.9211) radius 1.9812 projected
  point P0 (0, 0)
extrude "Extrusion41" add sketch "Sketch41" against normal blind 12.7
sketch "Sketch42" plane through (0, 0, 0.7366) normal (0, 0, 1) x (1, 0, 0)
  circle A0 centre (65.8804, -7.1709) radius 1.9818 projected
  circle A1 centre (65.8804, -88.1461) radius 1.9818 projected
  circle A2 centre (-15.0948, -7.1709) radius 1.9812 projected
  circle A3 centre (-15.0948, -88.1461) radius 1.9812 projected
  circle A4 centre (-15.0948, 405.5283) radius 1.9812 projected
  circle A5 centre (-15.0948, 324.5531) radius 1.9812 projected
  circle A6 centre (65.8804, 405.5283) radius 1.9812 projected
  circle A7 centre (-25.4072, 158.6911) radius 12.7 projected
  line L0 (76.1928, 107.8911) -> (38.0928, 107.8911) projected
  arc A8 (25.3928, 120.5911) -> (38.0928, 107.8911) centre (38.0928, 120.5911) ccw projected
  line L1 (25.3928, 120.5911) -> (25.3928, 196.7911) projected
  arc A9 (38.0928, 209.4911) -> (25.3928, 196.7911) centre (38.0928, 196.7911) ccw projected
  line L2 (38.0928, 209.4911) -> (76.1928, 209.4911) projected
  line L3 (76.1928, 422.1907) -> (76.1928, 209.4911) projected
  line L4 (76.1928, 422.1907) -> (-79.3822, 422.1907) projected
  line L5 (-79.3822, 422.1907) -> (-79.3822, -104.8085) projected
  line L6 (-79.3822, -104.8085) -> (76.1928, -104.8085) projected
  line L7 (76.1928, 107.8911) -> (76.1928, -104.8085) projected
  line L8 (65.8804, 405.5283) -> (-15.0948, 405.5283)
  line L9 (-15.0948, 405.5283) -> (-15.0948, 324.5531)
  line L10 (25.3928, 365.0407) -> (25.3928, 415.8407)
  line L11 (25.3928, 415.8407) -> (-25.4072, 415.8407)
  line L12 (-25.4072, 415.8407) -> (76.1928, 415.8407)
  line L13 (76.1928, 415.8407) -> (76.1928, 314.2407)
  line L14 (76.1928, 314.2407) -> (-25.4072, 314.2407)
  line L15 (-25.4072, 314.2407) -> (-25.4072, 415.8407)
  point P0 (0, 0)
  dimension "d106" = 50.8
  dimension "d107" = 50.8
  dimension "d108" = 101.6
  dimension "d109" = 101.6
extrude "Extrusion42" cut sketch "Sketch42" against normal blind 25.4 contours L7 L6 L5 L4 L3 L12 L11 L15 L14 L2 A9 L1 A8 L0
sketch "Sketch43" plane through (0, 0, 0.7366) normal (0, 0, 1) x (1, 0, 0)
  line L0 (-25.4072, 314.2407) -> (76.1928, 314.2407) projected
  line L1 (76.1928, 415.8407) -> (76.1928, 314.2407) projected
  line L2 (76.1928, 415.8407) -> (-25.4072, 415.8407) projected
  line L3 (-25.4072, 415.8407) -> (-25.4072, 314.2407) projected
  circle A0 centre (-15.0948, 405.5283) radius 1.9812 projected
  circle A1 centre (-15.0948, 324.5531) radius 1.9812 projected
  circle A2 centre (65.8804, 324.5531) radius 1.9812 projected
  circle A3 centre (65.8804, 405.5283) radius 1.9812 projected
  point P0 (0, 0)
extrude "Extrusion43" cut sketch "Sketch43" against normal blind 6.35
sketch "Sketch44" plane through (-25.4072, 415.8407, -11.9634) normal (0, 1, 0) x (1, 0, 0)
  line L0 (0, -6.35) -> (101.6, -6.35) projected
  line L1 (101.6, 0) -> (101.6, -6.35) projected
  line L2 (0, 0) -> (101.6, 0) projected
  line L3 (0, -6.35) -> (0, 0) projected
  point P0 (25.4072, -11.9634)
extrude "Extrusion44" add sketch "Sketch44" along normal blind 19.05
sketch "Sketch45" plane through (-25.4072, 314.2407, -11.9634) normal (0, -1, 0) x (1, 0, 0)
  line L0 (101.6, 6.35) -> (0, 6.35) projected
  line L1 (0, 6.35) -> (0, 0) projected
  line L2 (101.6, 0) -> (0, 0) projected
  line L3 (101.6, 6.35) -> (101.6, 0) projected
  point P0 (25.4072, 11.9634)
extrude "Extrusion45" add sketch "Sketch45" along normal blind 19.05
sketch "Sketch46" plane through (0, 0, -11.9634) normal (0, 0, -1) x (-1, 0, 0)
  line L0 (-76.1928, 295.1907) -> (25.4072, 295.1907) projected
  circle A0 centre (-65.8804, 324.5531) radius 1.9812 projected
  circle A1 centre (15.0948, 324.5531) radius 1.9812 projected
  circle A2 centre (15.0948, 405.5283) radius 1.9812 projected
  line L1 (-65.8804, 324.5531) -> (15.0948, 324.5531)
  line L2 (15.0948, 324.5531) -> (15.0948, 405.5283)
  circle A3 centre (-25.3928, 365.0407) radius 11.5
  line L3 (-25.3928, 365.0407) -> (-35.8928, 365.0407)
  line L4 (-35.8928, 365.0407) -> (-14.8928, 365.0407)
  line L5 (-14.8928, 365.0407) -> (-14.8928, 400.0407)
  line L6 (-14.8928, 400.0407) -> (-35.8928, 400.0407)
  line L7 (-35.8928, 400.0407) -> (-35.8928, 365.0407)
  point P0 (0, 0)
  dimension "d118" = 23
  dimension "d119" = 10.5
  dimension "d120" = 21
  dimension "d121" = 35
extrude "Extrusion46" cut sketch "Sketch46" against normal blind 19.05 contours A3 L7 L3 L4 L5 | L5 L4 L3 L7 A3 | A3 L7 L6 L5
sketch "Sketch47" plane through (0, 0, -11.9634) normal (0, 0, -1) x (-1, 0, 0)
  arc A0 (-35.8928, 369.7311) -> (-14.8928, 369.7311) centre (-25.3928, 365.0407) ccw projected
  line L0 (-76.1928, 295.1907) -> (25.4072, 295.1907) projected
  line L1 (-25.3928, 365.0407) -> (-38.8928, 365.0407)
  line L2 (-38.8928, 365.0407) -> (-38.8928, 371.5407)
  line L3 (-38.8928, 371.5407) -> (-38.8928, 379.5407)
  line L4 (-38.8928, 379.5407) -> (-38.8928, 387.5407)
  line L5 (-38.8928, 371.5407) -> (-11.8928, 371.5407)
  line L6 (-38.8928, 387.5407) -> (-11.8928, 387.5407)
  circle A1 centre (-38.8928, 371.5407) radius 1
  circle A2 centre (-38.8928, 387.5407) radius 1
  circle A3 centre (-11.8928, 371.5407) radius 1
  circle A4 centre (-11.8928, 387.5407) radius 1
  point P0 (0, 0)
  dimension "d124" = 13.5
  dimension "d125" = 6.5
  dimension "d126" = 8
  dimension "d127" = 8
  dimension "d128" = 27
  dimension "d129" = 27
  dimension "d130" = 2
extrude "Extrusion47" cut sketch "Sketch47" against normal blind 25.4
sketch "Sketch48" plane through (0, 0, -5.6134) normal (0, 0, 1) x (1, 0, 0)
  circle A0 centre (38.8928, 371.5407) radius 1 projected
  circle A1 centre (38.8928, 387.5407) radius 1 projected
  circle A2 centre (11.8928, 387.5407) radius 1 projected
  circle A3 centre (11.8928, 371.5407) radius 1 projected
  line L0 (35.8928, 400.0407) -> (35.8928, 369.7311) projected
  arc A4 (14.8928, 369.7311) -> (35.8928, 369.7311) centre (25.3928, 365.0407) ccw projected
  line L1 (14.8928, 369.7311) -> (14.8928, 400.0407) projected
  line L2 (14.8928, 400.0407) -> (35.8928, 400.0407) projected
  point P0 (0, 0)
extrude "Extrusion48" add sketch "Sketch48" against normal blind 6.35
sketch "Sketch49" plane through (0, 0, -5.6134) normal (0, 0, 1) x (1, 0, 0)
  circle A0 centre (65.8804, 324.5531) radius 1.9812 projected
  line L0 (76.1928, 434.8907) -> (76.1928, 295.1907) projected
  line L1 (-25.4072, 295.1907) -> (-25.4072, 434.8907) projected
  line L2 (-25.4072, 324.5531) -> (76.1928, 324.5531)
  line L3 (65.8804, 324.5531) -> (76.1928, 324.5531)
  line L4 (76.1928, 324.5531) -> (76.1928, 314.2407)
  line L5 (76.1928, 314.2407) -> (65.8804, 314.2407)
  line L6 (65.8804, 314.2407) -> (65.8804, 324.5531)
  line L7 (76.1928, 314.2407) -> (-25.4072, 314.2407)
  line L8 (-25.4072, 314.2407) -> (-25.4072, 415.8407)
  line L9 (-25.4072, 415.8407) -> (76.1928, 415.8407)
  line L10 (76.1928, 415.8407) -> (76.1928, 314.2407)
  line L11 (-25.4072, 415.8407) -> (76.1928, 415.8407)
  line L12 (76.1928, 415.8407) -> (76.1928, 434.8907)
  line L13 (76.1928, 434.8907) -> (-25.4072, 434.8907)
  line L14 (-25.4072, 434.8907) -> (-25.4072, 415.8407)
  line L15 (76.1928, 314.2407) -> (-25.4072, 314.2407)
  line L16 (-25.4072, 314.2407) -> (-25.4072, 295.1907)
  line L17 (-25.4072, 295.1907) -> (76.1928, 295.1907)
  line L18 (76.1928, 295.1907) -> (76.1928, 314.2407)
  point P0 (0, 0)
  dimension "d135" = 10.3124
  dimension "d136" = 101.6
  dimension "d137" = 101.6
extrude "Extrusion49" cut sketch "Sketch49" against normal blind 6.35 contours L5 L0 L17 L1 L7 | L9 L1 L13 L0
sketch "Sketch50" plane through (0, 0, -11.9634) normal (0, 0, -1) x (-1, 0, 0)
  line L0 (-76.1928, 314.2407) -> (25.4072, 314.2407) projected
  line L1 (25.4072, 314.2407) -> (20.0732, 314.2407)
  line L2 (20.0732, 314.2407) -> (13.7232, 314.2407)
  line L3 (13.7232, 314.2407) -> (13.7232, 329.4807)
  line L4 (13.7232, 329.4807) -> (20.0732, 329.4807)
  line L5 (20.0732, 329.4807) -> (20.0732, 314.2407)
  line L6 (13.7232, 329.4807) -> (20.0732, 329.4807)
  line L7 (20.0732, 329.4807) -> (20.0732, 400.6007)
  line L8 (20.0732, 400.6007) -> (13.7232, 400.6007)
  line L9 (13.7232, 400.6007) -> (13.7232, 329.4807)
  point P0 (0, 0)
  dimension "d140" = 5.334
  dimension "d141" = 6.35
  dimension "d142" = 15.24
  dimension "d143" = 71.12
extrude "Extrusion50" cut sketch "Sketch50" against normal blind 6.35 contours L9 L8 L7 L4
sketch "Sketch51" plane through (0, 0, -11.9634) normal (0, 0, -1) x (-1, 0, 0)
  line L0 (13.7232, 329.4807) -> (20.0732, 329.4807)
  line L1 (20.0732, 329.4807) -> (20.0732, 328.7187)
  line L2 (20.0732, 328.7187) -> (13.7232, 328.7187)
  line L3 (13.7232, 328.7187) -> (13.7232, 329.4807)
  line L4 (13.7232, 400.6007) -> (20.0732, 400.6007)
  line L5 (20.0732, 400.6007) -> (20.0732, 401.3627)
  line L6 (20.0732, 401.3627) -> (13.7232, 401.3627)
  line L7 (13.7232, 401.3627) -> (13.7232, 400.6007)
  point P0 (0, 0)
  dimension "d146" = 0.762
  dimension "d147" = 0.762
extrude "Extrusion51" cut sketch "Sketch51" against normal blind 6.35
sketch "Sketch52" plane through (0, 0, -5.6134) normal (0, 0, 1) x (1, 0, 0)
  circle A0 centre (65.8804, 324.5531) radius 1.9812 projected
  circle A1 centre (65.8804, 405.5283) radius 1.9812 projected
  circle A2 centre (-15.0948, 405.5283) radius 1.9812 projected
  circle A3 centre (-15.0948, 324.5531) radius 1.9812 projected
  line L0 (-15.0948, 405.5283) -> (65.8804, 324.5531)
  line L1 (-15.0948, 324.5531) -> (65.8804, 405.5283)
  circle A4 centre (25.3928, 365.0407) radius 8
  circle A5 centre (33.3928, 365.0407) radius 1
  circle A6 centre (25.3928, 357.0407) radius 1
  circle A7 centre (25.3928, 373.0407) radius 1
  circle A8 centre (17.3928, 365.0407) radius 1
  point P0 (0, 0)
  dimension "d150" = 16
  dimension "d151" = 2
  dimension "d152" = 2
  dimension "d153" = 2
  dimension "d154" = 2
extrude "Extrusion52" cut sketch "Sketch52" against normal blind 6.35 contours A7 A4 | A4 A7 | A8 A4 | A4 A8 | A6 A4 | A4 A6 | A5 A4 | A4 A5
properties part number "kinect rotate2 side"
